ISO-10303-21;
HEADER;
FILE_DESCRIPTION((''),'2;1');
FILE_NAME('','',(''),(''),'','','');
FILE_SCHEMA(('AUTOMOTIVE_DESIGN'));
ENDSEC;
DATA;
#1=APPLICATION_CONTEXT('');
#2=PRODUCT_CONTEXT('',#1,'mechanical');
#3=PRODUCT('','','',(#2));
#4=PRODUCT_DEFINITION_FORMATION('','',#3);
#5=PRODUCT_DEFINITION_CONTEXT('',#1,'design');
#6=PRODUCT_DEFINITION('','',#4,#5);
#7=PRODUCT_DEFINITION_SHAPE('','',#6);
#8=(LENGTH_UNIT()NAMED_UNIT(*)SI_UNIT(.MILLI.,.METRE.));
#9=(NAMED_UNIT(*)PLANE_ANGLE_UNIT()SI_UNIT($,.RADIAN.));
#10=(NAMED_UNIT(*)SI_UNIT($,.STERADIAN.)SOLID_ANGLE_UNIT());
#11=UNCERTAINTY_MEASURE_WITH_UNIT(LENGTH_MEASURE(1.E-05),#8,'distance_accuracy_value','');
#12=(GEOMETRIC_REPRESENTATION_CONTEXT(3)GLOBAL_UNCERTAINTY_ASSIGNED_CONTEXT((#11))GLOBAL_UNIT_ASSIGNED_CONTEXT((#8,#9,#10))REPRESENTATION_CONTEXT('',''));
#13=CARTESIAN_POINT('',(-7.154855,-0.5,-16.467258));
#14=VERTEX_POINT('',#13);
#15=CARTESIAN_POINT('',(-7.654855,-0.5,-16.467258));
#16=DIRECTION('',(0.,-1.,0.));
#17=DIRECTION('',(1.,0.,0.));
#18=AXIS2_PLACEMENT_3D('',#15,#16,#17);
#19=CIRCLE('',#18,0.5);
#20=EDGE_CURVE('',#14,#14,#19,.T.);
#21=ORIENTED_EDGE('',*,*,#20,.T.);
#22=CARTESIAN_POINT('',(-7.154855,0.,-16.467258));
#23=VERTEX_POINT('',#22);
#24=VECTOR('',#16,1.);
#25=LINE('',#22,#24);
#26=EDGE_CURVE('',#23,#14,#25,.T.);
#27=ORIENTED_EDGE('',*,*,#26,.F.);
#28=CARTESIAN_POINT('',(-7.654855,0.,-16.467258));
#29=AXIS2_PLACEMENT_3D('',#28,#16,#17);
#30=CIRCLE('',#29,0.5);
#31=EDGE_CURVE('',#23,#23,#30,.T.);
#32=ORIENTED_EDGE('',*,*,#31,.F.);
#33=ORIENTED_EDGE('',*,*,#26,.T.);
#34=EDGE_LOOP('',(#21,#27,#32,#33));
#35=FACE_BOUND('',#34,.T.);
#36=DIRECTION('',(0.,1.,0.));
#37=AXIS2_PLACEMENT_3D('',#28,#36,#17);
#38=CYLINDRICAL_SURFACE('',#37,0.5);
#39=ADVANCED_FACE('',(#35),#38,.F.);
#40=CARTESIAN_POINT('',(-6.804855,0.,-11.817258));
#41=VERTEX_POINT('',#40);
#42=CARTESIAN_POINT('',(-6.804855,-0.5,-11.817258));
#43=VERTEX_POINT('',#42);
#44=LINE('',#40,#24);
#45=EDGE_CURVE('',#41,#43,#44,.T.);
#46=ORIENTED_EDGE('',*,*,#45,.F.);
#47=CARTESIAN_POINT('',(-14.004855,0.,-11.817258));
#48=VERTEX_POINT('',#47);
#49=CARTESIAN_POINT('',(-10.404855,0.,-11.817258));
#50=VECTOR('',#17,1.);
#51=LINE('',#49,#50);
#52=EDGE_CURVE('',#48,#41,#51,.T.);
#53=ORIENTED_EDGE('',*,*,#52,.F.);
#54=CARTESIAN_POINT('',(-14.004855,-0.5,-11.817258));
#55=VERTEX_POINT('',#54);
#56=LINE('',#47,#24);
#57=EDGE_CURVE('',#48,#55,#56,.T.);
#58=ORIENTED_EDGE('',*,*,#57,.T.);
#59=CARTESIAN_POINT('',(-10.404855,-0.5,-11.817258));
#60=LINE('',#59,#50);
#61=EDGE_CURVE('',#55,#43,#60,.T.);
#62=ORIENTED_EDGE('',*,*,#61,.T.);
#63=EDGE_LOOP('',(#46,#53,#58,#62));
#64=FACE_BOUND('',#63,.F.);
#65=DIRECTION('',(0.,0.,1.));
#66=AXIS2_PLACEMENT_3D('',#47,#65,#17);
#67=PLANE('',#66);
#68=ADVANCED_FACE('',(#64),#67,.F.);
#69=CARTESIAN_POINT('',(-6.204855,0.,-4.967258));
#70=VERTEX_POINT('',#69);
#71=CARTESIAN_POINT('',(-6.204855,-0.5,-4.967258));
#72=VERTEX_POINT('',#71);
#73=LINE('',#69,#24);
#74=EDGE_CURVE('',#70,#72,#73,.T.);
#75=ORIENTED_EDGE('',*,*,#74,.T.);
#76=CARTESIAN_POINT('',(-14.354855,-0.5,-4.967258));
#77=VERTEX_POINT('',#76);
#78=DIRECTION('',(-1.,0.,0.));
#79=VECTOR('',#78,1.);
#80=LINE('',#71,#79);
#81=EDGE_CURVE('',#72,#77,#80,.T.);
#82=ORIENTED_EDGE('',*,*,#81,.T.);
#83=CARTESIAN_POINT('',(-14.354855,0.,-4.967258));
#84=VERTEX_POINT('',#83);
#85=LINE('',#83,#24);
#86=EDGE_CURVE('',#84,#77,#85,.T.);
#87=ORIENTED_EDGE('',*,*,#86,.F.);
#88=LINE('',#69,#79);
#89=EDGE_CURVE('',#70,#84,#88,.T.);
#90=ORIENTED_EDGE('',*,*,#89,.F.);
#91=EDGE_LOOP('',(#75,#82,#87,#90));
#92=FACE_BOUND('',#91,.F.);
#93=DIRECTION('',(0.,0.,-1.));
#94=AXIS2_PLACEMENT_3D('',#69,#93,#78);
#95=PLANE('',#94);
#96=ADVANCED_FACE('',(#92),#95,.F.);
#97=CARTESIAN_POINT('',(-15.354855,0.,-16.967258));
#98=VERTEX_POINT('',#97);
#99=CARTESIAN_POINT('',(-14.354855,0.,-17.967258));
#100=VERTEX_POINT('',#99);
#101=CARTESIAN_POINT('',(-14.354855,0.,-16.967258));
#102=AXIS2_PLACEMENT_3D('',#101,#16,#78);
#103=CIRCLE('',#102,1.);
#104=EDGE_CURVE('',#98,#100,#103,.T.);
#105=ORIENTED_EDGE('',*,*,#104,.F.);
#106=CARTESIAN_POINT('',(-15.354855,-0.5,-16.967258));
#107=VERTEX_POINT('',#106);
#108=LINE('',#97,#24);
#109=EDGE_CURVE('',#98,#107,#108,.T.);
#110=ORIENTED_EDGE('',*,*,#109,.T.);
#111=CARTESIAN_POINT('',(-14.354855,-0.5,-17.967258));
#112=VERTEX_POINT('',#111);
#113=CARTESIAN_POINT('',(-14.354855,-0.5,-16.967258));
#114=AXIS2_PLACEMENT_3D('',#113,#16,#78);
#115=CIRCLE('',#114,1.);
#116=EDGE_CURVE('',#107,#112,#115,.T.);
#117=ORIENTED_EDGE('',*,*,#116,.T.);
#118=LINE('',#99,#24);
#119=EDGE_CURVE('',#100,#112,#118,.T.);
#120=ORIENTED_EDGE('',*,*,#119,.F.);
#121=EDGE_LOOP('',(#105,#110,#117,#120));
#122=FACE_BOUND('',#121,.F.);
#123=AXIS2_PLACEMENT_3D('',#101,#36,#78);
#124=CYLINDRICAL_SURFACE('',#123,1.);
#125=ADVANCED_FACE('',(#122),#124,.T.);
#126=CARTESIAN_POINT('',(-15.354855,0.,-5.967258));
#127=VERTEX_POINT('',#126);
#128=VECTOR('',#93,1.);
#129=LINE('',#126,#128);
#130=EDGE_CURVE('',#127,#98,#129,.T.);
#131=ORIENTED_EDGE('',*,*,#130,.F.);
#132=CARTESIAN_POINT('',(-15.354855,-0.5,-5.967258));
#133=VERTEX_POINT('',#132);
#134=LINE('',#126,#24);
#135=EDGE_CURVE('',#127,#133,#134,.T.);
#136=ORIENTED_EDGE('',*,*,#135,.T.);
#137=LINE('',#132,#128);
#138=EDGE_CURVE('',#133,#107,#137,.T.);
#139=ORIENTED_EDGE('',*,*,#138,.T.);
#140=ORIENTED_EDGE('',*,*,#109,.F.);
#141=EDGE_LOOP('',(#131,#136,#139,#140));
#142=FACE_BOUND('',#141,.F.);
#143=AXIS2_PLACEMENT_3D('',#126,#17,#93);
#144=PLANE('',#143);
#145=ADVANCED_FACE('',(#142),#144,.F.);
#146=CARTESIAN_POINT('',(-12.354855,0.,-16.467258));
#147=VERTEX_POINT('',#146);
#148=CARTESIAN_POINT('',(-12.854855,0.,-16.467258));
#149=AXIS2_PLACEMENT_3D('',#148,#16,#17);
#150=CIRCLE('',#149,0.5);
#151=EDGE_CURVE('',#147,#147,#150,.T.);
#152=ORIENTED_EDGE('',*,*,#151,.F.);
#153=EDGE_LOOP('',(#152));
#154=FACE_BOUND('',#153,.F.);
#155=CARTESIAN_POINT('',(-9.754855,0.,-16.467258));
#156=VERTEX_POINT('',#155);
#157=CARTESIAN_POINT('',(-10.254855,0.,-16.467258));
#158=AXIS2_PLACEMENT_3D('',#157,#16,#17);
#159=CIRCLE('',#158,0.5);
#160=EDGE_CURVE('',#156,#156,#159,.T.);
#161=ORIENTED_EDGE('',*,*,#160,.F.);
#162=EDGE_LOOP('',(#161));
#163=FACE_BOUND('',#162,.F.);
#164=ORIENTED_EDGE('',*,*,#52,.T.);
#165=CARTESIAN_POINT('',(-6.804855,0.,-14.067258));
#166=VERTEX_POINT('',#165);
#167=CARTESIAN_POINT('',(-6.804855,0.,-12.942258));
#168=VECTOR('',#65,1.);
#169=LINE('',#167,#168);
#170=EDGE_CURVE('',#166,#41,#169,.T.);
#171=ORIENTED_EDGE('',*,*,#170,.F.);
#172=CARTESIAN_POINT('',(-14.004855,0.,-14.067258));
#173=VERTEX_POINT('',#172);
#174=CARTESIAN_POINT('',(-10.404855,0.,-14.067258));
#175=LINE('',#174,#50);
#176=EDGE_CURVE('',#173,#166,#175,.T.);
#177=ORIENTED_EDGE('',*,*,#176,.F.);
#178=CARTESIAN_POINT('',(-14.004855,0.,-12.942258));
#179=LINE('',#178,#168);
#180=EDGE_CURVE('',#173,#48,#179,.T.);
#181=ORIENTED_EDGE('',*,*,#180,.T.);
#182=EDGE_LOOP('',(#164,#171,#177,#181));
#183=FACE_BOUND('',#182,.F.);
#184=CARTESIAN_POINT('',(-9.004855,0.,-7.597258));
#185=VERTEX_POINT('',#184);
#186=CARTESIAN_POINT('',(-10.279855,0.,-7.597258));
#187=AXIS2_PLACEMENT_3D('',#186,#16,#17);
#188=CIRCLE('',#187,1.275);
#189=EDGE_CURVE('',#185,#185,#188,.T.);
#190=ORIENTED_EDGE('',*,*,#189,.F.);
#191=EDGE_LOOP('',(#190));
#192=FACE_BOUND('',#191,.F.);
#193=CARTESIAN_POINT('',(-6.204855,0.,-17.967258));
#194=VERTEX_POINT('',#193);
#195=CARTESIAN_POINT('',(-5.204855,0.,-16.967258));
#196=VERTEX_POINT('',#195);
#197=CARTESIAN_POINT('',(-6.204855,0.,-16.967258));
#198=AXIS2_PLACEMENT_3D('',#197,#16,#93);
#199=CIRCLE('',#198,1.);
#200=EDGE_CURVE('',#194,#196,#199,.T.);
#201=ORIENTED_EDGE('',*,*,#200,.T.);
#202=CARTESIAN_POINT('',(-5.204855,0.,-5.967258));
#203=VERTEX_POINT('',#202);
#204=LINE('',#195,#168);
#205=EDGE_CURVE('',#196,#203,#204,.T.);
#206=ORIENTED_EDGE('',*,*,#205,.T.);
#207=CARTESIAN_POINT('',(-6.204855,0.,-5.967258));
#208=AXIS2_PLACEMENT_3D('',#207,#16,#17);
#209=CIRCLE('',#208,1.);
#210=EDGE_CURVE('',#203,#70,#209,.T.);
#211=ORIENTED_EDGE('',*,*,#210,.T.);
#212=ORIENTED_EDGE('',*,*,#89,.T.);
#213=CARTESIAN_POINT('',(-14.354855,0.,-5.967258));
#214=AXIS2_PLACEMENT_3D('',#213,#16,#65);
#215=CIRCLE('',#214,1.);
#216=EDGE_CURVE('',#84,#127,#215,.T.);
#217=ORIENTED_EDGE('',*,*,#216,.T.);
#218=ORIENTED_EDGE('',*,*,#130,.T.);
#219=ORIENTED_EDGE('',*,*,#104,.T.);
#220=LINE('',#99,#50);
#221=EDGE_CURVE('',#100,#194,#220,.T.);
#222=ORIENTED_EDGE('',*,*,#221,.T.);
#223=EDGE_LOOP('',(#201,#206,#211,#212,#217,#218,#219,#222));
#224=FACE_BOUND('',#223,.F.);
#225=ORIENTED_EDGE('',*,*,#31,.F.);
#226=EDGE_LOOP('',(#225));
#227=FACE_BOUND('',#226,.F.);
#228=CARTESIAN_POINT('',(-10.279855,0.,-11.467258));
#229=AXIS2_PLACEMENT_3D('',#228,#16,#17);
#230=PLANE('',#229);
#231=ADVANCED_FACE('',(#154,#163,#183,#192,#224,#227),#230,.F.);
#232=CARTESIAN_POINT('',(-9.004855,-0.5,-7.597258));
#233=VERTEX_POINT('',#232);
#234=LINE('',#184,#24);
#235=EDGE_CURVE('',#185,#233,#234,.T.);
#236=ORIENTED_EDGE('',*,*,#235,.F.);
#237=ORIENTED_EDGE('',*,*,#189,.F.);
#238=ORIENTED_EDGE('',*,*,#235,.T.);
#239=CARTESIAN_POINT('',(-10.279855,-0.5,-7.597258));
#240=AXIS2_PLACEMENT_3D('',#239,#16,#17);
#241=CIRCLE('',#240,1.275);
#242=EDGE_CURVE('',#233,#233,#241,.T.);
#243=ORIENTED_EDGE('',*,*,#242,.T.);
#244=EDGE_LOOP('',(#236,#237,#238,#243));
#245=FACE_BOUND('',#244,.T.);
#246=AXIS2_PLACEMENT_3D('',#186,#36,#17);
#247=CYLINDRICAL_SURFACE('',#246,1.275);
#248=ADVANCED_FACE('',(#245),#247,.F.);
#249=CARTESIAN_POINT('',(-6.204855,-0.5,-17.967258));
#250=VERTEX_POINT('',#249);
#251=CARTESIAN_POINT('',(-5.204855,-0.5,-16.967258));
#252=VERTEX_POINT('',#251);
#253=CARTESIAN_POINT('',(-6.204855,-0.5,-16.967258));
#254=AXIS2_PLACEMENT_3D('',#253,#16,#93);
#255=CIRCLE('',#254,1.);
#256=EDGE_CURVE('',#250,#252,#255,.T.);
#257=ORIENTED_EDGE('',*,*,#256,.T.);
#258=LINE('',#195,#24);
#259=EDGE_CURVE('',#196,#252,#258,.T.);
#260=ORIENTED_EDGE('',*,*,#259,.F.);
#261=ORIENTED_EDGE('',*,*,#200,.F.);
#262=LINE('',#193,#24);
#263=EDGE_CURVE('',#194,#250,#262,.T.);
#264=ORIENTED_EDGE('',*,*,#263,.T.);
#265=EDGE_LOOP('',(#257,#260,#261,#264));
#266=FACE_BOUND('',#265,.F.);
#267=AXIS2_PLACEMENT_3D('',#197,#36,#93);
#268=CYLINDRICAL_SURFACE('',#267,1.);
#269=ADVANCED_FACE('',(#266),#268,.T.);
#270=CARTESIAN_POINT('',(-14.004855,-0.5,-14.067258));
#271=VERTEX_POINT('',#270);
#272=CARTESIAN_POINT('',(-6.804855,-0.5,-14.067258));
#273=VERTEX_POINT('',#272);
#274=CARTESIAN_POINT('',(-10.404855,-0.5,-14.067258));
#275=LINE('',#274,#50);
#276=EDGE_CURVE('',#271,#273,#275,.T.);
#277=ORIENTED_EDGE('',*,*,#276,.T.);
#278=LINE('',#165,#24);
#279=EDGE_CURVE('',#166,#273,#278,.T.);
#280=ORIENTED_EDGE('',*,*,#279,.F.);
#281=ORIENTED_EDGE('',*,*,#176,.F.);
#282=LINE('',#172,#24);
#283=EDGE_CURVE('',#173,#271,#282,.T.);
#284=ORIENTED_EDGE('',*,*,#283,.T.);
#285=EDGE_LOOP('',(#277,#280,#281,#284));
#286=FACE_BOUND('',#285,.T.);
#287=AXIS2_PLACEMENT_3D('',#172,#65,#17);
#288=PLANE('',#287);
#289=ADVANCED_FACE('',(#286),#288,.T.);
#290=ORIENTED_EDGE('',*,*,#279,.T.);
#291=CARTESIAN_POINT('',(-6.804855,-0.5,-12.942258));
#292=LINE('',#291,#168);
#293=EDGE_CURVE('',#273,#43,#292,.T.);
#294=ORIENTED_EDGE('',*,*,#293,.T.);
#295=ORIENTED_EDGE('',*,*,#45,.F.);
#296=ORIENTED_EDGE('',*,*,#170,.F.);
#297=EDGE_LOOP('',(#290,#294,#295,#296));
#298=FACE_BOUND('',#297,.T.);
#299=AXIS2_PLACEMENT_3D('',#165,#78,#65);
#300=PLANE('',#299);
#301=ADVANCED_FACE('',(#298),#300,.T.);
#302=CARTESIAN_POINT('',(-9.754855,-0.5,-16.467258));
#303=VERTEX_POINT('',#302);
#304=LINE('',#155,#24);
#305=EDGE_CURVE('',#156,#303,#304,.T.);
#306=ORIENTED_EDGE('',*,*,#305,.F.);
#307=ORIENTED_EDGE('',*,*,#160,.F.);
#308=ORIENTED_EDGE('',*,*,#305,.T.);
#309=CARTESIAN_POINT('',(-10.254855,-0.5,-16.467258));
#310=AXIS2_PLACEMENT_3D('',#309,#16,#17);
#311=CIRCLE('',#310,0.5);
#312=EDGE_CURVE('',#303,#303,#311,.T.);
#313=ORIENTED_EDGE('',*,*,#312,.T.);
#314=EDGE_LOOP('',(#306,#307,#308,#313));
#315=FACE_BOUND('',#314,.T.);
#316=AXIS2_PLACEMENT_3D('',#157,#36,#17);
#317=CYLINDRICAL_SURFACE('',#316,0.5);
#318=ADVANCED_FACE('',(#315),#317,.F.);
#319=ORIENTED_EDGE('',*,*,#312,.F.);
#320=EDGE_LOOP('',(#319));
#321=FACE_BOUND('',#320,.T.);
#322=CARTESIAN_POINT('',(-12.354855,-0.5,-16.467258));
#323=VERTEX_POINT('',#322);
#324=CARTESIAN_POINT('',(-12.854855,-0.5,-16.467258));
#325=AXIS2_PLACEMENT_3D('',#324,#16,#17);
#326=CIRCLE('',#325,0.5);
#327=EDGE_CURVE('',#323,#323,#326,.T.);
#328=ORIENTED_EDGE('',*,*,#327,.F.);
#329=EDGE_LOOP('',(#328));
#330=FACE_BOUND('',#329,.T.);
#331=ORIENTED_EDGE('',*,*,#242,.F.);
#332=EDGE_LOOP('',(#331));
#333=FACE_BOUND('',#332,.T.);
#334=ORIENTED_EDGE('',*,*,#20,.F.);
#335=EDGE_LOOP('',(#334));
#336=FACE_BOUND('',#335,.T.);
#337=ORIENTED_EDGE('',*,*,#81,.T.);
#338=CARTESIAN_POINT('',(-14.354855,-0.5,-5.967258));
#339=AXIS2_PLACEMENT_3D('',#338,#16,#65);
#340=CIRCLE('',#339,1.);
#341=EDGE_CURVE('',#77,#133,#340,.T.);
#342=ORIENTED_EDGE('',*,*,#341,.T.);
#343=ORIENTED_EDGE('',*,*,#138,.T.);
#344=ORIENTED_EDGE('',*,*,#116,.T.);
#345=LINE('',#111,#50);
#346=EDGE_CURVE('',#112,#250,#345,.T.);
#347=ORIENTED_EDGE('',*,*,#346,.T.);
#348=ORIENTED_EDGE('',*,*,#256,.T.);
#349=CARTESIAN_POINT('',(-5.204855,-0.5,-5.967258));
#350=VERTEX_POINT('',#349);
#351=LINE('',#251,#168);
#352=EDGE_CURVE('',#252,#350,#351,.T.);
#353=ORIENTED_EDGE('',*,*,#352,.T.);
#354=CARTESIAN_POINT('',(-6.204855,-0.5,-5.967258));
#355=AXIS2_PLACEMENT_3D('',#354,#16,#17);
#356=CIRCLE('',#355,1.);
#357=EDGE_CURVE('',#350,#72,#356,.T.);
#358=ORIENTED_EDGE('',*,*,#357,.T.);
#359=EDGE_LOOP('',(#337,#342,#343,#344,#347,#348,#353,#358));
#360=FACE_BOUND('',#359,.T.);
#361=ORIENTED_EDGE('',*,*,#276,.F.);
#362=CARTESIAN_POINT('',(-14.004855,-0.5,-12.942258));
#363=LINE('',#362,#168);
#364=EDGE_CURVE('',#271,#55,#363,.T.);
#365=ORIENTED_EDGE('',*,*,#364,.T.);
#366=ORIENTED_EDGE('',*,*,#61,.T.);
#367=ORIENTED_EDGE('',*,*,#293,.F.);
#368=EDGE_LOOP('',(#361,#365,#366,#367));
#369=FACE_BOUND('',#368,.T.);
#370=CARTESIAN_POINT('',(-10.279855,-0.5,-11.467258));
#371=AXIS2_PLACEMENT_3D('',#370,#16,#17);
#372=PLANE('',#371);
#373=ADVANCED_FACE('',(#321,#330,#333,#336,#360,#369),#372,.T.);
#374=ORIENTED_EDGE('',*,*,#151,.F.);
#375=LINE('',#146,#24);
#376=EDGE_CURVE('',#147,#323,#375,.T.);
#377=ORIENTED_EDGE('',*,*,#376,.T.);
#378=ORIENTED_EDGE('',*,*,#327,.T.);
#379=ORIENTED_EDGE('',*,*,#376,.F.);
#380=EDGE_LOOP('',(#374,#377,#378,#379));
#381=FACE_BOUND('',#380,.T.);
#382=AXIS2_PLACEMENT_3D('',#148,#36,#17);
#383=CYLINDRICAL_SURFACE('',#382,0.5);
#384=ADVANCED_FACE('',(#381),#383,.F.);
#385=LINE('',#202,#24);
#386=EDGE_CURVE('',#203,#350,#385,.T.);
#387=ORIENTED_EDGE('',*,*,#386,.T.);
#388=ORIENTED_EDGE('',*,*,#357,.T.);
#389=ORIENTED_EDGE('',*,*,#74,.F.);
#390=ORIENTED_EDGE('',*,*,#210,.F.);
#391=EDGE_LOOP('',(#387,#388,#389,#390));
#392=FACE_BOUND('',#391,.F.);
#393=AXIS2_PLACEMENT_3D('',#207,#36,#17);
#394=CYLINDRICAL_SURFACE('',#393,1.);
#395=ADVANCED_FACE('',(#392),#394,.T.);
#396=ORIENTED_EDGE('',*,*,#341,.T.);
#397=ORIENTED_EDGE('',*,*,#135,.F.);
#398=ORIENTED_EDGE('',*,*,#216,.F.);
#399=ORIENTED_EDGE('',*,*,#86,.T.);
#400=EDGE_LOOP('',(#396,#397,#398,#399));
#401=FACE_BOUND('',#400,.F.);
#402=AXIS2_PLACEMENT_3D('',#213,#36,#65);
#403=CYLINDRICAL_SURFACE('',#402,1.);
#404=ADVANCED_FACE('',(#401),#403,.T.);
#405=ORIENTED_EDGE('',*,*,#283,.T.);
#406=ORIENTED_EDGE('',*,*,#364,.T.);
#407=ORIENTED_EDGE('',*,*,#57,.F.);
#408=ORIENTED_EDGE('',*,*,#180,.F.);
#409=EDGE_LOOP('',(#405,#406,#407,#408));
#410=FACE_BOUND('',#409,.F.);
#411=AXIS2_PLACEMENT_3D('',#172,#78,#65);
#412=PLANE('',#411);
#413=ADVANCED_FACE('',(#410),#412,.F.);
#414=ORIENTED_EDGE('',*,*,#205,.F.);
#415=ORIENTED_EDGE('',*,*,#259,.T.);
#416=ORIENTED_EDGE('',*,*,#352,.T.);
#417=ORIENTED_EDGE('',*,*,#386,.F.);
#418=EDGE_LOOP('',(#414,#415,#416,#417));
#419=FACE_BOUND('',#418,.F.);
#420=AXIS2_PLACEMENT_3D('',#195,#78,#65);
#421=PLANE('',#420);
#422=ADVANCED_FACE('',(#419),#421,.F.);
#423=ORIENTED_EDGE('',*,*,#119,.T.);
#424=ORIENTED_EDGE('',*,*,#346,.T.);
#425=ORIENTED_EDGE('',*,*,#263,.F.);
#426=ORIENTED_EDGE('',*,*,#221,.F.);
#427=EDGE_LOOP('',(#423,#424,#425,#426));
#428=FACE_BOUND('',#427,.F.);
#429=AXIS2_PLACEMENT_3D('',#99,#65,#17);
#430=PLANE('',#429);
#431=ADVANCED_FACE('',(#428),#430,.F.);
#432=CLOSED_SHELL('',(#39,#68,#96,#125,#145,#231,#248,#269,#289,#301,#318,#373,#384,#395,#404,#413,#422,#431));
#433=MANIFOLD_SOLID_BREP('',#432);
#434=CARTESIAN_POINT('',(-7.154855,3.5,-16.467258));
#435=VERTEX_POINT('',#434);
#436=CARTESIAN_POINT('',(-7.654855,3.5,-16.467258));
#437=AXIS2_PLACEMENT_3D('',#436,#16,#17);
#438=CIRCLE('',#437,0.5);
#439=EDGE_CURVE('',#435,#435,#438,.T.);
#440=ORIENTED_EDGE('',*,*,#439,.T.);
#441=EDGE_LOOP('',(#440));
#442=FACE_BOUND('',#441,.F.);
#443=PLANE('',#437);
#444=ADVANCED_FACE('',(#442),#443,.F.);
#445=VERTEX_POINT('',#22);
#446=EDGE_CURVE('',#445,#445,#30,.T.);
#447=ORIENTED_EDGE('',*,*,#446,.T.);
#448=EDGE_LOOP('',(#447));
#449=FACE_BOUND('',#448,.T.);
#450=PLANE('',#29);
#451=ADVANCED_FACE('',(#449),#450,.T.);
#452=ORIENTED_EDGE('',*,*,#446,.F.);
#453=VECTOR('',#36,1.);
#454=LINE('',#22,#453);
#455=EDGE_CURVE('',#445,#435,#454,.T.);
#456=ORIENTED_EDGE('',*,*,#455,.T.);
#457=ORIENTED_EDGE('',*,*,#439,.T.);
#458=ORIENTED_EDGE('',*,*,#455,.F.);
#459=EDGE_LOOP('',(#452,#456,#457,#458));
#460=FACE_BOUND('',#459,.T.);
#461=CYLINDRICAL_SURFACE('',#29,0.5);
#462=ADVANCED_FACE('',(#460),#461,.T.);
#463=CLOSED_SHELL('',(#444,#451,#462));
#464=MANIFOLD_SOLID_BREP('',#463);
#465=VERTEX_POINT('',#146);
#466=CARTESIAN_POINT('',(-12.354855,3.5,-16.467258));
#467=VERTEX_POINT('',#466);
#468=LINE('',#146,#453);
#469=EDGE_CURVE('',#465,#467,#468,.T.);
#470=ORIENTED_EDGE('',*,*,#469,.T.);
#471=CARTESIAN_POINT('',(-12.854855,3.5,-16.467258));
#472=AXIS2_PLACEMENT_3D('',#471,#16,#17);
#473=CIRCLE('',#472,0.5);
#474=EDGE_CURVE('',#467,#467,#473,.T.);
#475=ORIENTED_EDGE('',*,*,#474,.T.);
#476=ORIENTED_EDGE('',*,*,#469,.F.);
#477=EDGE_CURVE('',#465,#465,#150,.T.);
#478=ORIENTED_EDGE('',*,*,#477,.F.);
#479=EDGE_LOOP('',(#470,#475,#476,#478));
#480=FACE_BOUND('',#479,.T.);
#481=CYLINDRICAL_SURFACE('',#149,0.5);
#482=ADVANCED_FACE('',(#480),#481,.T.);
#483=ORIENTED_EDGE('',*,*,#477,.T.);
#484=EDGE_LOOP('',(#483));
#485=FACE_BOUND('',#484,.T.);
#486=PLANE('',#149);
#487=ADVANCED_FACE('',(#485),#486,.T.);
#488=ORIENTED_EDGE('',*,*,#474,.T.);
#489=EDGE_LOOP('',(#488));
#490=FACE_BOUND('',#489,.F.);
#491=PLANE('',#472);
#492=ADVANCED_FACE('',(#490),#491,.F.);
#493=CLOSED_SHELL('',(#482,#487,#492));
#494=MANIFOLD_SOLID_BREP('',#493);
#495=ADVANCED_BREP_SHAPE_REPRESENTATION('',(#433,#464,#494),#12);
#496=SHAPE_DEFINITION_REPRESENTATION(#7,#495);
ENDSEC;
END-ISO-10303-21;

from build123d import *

# Parameters (mm, degrees)
F0_R     = 0.5
F0_W     = 7.2
F0_H     = 2.25
F0_R_2   = 1.275
F1_DEPTH = 0.5
F2_DEPTH = 3.5
F3_DEPTH = 1


# Not quite as in the source:
# - a feature names something its author has since deleted; it is built from what else it names


with BuildPart() as f1:
    # F0 (on Front) → F1 (new body)
    with BuildSketch(Plane.XZ):
        with BuildLine():
            ThreePointArc((-14.3548552409, -4.9672579244), (-15.0619620221, -5.2601511432), (-15.3548552409, -5.9672579244))
            Line((-15.3548552409, -5.9672579244), (-15.3548552409, -16.9672579244))
            ThreePointArc((-15.3548552409, -16.9672579244), (-15.0619620221, -17.6743647056), (-14.3548552409, -17.9672579244))
            Line((-14.3548552409, -17.9672579244), (-6.2048552409, -17.9672579244))
            ThreePointArc((-6.2048552409, -17.9672579244), (-5.4977484597, -17.6743647056), (-5.2048552409, -16.9672579244))
            Line((-5.2048552409, -16.9672579244), (-5.2048552409, -5.9672579244))
            ThreePointArc((-5.2048552409, -5.9672579244), (-5.4977484597, -5.2601511432), (-6.2048552409, -4.9672579244))
            Line((-6.2048552409, -4.9672579244), (-14.3548552409, -4.9672579244))
        make_face()
        with Locations((-12.8548552409, -16.4672579244)):
            Circle(F0_R, mode=Mode.SUBTRACT)
        with Locations((-10.4048552409, -12.9422579244)):
            Rectangle(F0_W, F0_H, mode=Mode.SUBTRACT)
        with Locations((-10.2548552409, -16.4672579244)):
            Circle(F0_R, mode=Mode.SUBTRACT)
        with Locations((-7.6548552409, -16.4672579244)):
            Circle(F0_R, mode=Mode.SUBTRACT)
        with Locations((-10.2798552409, -7.5972579244)):
            Circle(F0_R_2, mode=Mode.SUBTRACT)
    extrude(amount=F1_DEPTH)

    # F0 (on Front) → F3 (cut)
    with BuildSketch(Plane.XZ):
        with Locations((-10.4048552409, -12.9422579244)):
            Rectangle(F0_W, F0_H)
    extrude(amount=-F3_DEPTH, mode=Mode.SUBTRACT)


with BuildPart() as f2:
    # F0 (on Front) → F2 (new body)
    with BuildSketch(Plane.XZ):
        with Locations((-12.8548552409, -16.4672579244)):
            Circle(F0_R)
    extrude(amount=-F2_DEPTH)


with BuildPart() as f2b:
    # F0 (on Front) → F2, piece 2 (new body)
    with BuildSketch(Plane.XZ):
        with Locations((-7.6548552409, -16.4672579244)):
            Circle(F0_R)
    extrude(amount=-F2_DEPTH)


solid = Compound([f1.part, f2.part, f2b.part])
